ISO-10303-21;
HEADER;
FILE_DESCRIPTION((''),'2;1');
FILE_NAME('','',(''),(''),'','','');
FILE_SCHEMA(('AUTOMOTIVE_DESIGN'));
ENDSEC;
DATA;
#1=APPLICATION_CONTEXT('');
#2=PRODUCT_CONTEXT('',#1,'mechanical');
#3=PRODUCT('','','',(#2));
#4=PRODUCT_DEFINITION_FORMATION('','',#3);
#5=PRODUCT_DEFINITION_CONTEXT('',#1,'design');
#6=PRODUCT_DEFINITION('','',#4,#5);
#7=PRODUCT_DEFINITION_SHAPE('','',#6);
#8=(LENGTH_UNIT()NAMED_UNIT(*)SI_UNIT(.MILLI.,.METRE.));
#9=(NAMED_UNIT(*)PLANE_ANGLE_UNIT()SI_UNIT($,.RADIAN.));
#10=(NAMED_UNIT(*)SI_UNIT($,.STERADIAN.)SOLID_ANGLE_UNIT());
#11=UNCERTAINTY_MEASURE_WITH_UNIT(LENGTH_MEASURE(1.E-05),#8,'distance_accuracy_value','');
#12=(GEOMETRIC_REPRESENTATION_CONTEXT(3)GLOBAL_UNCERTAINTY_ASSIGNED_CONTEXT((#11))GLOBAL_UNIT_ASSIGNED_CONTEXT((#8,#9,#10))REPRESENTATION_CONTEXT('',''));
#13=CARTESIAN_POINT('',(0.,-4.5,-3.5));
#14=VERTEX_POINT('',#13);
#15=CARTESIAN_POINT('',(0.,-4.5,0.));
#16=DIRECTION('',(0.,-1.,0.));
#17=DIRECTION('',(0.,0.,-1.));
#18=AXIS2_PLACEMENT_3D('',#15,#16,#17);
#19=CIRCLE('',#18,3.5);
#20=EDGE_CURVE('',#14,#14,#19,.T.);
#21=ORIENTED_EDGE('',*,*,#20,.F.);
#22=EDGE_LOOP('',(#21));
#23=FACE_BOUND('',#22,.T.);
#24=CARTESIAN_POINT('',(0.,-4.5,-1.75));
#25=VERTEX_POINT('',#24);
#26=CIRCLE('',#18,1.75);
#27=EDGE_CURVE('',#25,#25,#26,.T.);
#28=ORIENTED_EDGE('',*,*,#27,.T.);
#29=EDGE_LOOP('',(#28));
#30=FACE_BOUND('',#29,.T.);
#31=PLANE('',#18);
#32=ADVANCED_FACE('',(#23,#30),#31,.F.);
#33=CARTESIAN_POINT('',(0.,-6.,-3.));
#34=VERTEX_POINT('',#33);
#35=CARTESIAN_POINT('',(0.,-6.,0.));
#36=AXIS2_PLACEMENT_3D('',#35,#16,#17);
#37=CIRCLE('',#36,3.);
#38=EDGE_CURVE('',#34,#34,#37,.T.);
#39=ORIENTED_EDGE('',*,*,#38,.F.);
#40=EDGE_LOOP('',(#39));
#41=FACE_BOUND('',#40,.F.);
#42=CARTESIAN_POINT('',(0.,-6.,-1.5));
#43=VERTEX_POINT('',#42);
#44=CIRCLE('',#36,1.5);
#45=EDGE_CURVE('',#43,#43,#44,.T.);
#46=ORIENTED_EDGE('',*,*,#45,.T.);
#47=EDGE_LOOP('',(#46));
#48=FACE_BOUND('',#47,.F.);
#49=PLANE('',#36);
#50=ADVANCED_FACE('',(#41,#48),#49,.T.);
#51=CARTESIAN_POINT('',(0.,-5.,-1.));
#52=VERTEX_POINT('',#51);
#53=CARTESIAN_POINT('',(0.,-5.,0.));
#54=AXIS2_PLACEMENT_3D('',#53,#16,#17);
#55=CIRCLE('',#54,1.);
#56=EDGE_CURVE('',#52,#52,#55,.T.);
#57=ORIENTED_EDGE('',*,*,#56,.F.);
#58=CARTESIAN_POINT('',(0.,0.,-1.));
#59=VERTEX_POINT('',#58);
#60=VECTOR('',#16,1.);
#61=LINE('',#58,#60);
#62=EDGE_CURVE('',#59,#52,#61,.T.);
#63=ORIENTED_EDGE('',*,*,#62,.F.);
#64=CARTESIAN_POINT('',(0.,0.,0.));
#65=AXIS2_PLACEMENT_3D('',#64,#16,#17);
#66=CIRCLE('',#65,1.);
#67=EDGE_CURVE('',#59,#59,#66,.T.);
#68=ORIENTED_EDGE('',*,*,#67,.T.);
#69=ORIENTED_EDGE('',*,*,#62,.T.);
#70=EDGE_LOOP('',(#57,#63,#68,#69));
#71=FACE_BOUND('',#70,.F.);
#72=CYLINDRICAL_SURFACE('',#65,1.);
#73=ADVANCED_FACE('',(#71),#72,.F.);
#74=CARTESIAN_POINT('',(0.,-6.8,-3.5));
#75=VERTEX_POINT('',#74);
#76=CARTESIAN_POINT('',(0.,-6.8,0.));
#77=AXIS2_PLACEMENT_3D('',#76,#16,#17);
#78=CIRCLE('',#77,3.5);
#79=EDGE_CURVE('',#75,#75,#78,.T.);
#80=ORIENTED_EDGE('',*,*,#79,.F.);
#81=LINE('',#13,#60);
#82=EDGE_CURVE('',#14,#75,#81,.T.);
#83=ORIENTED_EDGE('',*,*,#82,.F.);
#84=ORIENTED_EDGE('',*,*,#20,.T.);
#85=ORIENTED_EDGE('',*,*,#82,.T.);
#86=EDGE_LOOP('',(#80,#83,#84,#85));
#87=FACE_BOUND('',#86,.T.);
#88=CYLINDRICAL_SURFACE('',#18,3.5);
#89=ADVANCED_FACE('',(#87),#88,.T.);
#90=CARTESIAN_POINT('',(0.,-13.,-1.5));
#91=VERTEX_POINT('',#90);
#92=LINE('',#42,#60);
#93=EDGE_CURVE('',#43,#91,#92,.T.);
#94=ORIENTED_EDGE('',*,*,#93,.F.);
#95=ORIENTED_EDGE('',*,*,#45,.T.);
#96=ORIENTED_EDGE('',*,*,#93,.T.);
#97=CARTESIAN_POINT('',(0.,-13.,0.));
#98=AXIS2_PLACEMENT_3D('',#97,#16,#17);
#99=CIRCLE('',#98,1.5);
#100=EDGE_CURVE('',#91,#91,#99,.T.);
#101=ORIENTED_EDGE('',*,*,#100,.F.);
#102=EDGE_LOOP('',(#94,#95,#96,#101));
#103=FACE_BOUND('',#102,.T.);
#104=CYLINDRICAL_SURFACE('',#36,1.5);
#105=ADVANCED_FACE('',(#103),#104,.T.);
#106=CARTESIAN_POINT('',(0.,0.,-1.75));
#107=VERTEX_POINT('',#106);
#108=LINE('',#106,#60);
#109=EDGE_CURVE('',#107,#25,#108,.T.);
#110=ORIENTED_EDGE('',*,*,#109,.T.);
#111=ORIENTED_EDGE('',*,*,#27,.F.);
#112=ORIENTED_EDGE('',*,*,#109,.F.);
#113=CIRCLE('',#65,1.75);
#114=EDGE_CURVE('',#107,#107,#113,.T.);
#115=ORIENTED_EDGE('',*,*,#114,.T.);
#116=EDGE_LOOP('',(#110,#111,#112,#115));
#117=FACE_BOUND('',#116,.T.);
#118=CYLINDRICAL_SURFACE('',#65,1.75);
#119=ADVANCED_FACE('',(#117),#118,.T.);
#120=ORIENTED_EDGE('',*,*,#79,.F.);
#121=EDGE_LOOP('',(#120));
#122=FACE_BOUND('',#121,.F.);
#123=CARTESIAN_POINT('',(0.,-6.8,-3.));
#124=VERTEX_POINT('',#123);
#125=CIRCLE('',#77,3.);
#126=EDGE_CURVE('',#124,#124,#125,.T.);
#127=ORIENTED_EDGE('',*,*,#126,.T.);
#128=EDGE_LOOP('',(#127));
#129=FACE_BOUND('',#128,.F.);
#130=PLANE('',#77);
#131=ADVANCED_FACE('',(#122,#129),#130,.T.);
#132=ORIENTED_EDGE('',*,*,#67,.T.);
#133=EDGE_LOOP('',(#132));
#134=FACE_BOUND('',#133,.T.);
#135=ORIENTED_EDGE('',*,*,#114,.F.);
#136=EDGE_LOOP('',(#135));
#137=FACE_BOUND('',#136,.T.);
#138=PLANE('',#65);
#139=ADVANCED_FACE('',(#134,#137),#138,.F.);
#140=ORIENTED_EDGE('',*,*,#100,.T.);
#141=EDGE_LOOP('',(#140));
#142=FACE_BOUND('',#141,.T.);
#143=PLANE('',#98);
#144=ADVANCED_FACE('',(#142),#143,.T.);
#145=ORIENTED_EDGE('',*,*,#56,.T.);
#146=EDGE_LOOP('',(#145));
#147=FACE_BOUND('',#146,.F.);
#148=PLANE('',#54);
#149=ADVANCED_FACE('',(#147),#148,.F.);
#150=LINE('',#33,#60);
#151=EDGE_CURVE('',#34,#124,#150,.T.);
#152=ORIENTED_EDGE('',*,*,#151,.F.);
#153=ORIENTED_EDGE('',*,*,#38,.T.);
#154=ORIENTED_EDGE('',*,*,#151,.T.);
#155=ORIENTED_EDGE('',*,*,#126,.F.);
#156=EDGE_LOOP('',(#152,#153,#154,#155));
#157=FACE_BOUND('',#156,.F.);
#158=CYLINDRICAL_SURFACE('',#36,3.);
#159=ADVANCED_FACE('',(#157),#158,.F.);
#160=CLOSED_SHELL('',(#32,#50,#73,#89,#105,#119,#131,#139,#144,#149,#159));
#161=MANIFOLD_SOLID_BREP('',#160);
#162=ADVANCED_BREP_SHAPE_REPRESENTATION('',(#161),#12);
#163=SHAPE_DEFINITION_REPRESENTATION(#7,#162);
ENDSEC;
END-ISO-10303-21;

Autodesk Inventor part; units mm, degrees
ref_plane "YZ Plane" through (0, 0, 0) normal (1, 0, 0) x (0, 1, 0)
ref_plane "XZ Plane" through (0, 0, 0) normal (0, 1, 0) x (-1, 0, 0)
ref_plane "XY Plane" through (0, 0, 0) normal (0, 0, 1) x (1, 0, 0)
sketch "Sketch1" plane through (0, 0, 0) normal (1, 0, 0) x (0, 1, 0)
  line L0 (0, -1) -> (-5, -1)
  line L1 (-5, -1) -> (-5, 0)
  line L2 (-4.5, -3.5) -> (-6.8, -3.5)
  line L3 (-6, -1.5) -> (-13, -1.5)
  line L4 (-13, -1.5) -> (-13, 0)
  line L5 (-6, -1.5) -> (-6, -3)
  line L6 (-6, -3) -> (-6.8, -3)
  line L7 (-6.8, -3) -> (-6.8, -3.5)
  line L8 (0, 0) -> (-1.5156, 0)
  line L9 (-5, 0) -> (-13, 0)
  line L10 (0, -1) -> (0, -1.75)
  line L11 (0, -1.75) -> (-4.5, -1.75)
  line L12 (-4.5, -1.75) -> (-4.5, -3.5)
  dimension "d4" = 0.5
  dimension "d5" = 1.5
  dimension "d6" = 0.8
  dimension "d7" = 1
  dimension "d11" = 8
  dimension "d12" = 2
  dimension "d13" = 5
  dimension "d14" = 3
  dimension "d15" = 1.5
  dimension "d16" = 3.5
  dimension "d17" = 7
revolve "Revolution1" add sketch "Sketch1" angle 360 about axis through (0, 0, 0) along (0, -1, 0)
thread "Thread1" size "M3x0.5" class "6g" standard "ANSI Metric M Profile" length 5
properties part number "042"
